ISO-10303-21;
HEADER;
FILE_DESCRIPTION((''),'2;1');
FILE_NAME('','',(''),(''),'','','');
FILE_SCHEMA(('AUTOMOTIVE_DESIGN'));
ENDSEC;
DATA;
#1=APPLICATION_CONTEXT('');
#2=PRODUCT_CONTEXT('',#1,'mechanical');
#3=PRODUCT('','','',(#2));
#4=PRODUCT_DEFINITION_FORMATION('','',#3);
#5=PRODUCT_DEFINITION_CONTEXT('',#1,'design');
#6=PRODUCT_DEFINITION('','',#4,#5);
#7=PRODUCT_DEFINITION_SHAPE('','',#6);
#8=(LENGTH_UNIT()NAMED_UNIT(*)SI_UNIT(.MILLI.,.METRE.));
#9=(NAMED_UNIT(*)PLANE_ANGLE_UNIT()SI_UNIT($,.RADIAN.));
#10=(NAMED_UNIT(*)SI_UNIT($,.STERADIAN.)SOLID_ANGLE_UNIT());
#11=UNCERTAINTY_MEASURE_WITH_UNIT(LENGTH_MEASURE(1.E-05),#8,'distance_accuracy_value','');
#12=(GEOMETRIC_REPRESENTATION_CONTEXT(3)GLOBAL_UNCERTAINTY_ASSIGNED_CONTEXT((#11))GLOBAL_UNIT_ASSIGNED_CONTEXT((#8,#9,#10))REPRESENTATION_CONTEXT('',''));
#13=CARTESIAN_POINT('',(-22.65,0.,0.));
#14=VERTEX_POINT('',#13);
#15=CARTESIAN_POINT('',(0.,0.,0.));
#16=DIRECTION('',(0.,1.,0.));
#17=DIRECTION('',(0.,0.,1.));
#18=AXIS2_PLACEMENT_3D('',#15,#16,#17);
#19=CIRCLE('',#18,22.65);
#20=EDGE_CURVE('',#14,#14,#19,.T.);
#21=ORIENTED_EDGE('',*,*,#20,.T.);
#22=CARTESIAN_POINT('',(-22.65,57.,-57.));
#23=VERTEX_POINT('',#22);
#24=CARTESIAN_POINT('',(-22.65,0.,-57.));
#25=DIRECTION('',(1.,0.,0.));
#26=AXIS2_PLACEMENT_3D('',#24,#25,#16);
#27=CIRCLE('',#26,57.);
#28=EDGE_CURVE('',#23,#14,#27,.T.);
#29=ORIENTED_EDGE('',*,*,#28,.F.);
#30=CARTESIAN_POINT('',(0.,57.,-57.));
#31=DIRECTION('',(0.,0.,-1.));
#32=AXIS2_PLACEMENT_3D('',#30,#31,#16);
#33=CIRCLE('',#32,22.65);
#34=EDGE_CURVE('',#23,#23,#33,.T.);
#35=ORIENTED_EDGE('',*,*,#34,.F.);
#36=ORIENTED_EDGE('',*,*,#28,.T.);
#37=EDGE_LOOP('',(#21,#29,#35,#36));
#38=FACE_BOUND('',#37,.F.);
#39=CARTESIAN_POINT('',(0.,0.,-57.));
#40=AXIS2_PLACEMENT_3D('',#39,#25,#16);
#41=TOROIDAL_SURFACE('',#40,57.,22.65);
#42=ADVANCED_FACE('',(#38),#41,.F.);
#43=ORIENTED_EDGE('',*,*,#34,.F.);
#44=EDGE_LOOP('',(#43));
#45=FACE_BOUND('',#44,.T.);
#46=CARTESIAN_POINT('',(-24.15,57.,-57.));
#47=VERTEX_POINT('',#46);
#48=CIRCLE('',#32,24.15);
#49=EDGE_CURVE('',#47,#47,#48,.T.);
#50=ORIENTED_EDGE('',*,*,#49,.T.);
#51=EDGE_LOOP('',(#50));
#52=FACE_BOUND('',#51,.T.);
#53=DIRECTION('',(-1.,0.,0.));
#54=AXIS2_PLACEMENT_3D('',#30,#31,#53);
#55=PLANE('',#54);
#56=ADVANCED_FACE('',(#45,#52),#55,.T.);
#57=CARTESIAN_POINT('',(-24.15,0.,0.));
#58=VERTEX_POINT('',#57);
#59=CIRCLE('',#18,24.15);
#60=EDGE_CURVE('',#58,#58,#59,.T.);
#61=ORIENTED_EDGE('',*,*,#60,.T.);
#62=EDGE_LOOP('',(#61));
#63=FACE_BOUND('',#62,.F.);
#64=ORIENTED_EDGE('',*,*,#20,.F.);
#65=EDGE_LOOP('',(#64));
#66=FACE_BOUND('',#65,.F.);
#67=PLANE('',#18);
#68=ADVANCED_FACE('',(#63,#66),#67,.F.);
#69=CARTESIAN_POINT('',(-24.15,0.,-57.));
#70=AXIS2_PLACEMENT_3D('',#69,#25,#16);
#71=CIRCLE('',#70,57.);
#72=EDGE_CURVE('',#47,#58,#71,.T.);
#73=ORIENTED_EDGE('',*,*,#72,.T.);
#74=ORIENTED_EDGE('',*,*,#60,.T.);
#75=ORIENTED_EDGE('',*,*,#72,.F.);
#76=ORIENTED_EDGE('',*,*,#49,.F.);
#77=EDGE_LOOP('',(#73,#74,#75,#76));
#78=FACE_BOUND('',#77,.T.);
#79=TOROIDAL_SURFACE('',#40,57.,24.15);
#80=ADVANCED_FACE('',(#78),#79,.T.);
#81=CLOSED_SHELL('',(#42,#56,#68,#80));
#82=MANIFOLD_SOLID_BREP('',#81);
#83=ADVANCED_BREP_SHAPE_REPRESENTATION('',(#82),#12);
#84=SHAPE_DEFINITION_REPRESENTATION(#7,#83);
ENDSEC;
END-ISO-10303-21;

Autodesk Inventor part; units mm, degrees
ref_plane "YZ Plane" through (0, 0, 0) normal (1, 0, 0) x (0, 1, 0)
ref_plane "XZ Plane" through (0, 0, 0) normal (0, 1, 0) x (-1, 0, 0)
ref_plane "XY Plane" through (0, 0, 0) normal (0, 0, 1) x (1, 0, 0)
sketch "Schizzo1" plane through (0, 0, 0) normal (0, 1, 0) x (-1, 0, 0)
  circle A0 centre (0, 0) radius 24.15
  circle A1 centre (0, 0) radius 22.65
  dimension "d0" = 48.3
  dimension "d1" = 45.3
sketch "Schizzo2" plane through (0, 0, 0) normal (1, 0, 0) x (0, 1, 0)
  arc A0 (57, -57) -> (0, 0) centre (0, -57) ccw
  line L0 (0, -57) -> (57, -57) construction
  line L1 (0, -57) -> (0, 0) construction
  dimension "d2" = 90
  dimension "d4" = 57
sweep "Sweep1" add profiles "Schizzo1" path "Schizzo2"
properties part number "06-01-2023 curva 90°"
